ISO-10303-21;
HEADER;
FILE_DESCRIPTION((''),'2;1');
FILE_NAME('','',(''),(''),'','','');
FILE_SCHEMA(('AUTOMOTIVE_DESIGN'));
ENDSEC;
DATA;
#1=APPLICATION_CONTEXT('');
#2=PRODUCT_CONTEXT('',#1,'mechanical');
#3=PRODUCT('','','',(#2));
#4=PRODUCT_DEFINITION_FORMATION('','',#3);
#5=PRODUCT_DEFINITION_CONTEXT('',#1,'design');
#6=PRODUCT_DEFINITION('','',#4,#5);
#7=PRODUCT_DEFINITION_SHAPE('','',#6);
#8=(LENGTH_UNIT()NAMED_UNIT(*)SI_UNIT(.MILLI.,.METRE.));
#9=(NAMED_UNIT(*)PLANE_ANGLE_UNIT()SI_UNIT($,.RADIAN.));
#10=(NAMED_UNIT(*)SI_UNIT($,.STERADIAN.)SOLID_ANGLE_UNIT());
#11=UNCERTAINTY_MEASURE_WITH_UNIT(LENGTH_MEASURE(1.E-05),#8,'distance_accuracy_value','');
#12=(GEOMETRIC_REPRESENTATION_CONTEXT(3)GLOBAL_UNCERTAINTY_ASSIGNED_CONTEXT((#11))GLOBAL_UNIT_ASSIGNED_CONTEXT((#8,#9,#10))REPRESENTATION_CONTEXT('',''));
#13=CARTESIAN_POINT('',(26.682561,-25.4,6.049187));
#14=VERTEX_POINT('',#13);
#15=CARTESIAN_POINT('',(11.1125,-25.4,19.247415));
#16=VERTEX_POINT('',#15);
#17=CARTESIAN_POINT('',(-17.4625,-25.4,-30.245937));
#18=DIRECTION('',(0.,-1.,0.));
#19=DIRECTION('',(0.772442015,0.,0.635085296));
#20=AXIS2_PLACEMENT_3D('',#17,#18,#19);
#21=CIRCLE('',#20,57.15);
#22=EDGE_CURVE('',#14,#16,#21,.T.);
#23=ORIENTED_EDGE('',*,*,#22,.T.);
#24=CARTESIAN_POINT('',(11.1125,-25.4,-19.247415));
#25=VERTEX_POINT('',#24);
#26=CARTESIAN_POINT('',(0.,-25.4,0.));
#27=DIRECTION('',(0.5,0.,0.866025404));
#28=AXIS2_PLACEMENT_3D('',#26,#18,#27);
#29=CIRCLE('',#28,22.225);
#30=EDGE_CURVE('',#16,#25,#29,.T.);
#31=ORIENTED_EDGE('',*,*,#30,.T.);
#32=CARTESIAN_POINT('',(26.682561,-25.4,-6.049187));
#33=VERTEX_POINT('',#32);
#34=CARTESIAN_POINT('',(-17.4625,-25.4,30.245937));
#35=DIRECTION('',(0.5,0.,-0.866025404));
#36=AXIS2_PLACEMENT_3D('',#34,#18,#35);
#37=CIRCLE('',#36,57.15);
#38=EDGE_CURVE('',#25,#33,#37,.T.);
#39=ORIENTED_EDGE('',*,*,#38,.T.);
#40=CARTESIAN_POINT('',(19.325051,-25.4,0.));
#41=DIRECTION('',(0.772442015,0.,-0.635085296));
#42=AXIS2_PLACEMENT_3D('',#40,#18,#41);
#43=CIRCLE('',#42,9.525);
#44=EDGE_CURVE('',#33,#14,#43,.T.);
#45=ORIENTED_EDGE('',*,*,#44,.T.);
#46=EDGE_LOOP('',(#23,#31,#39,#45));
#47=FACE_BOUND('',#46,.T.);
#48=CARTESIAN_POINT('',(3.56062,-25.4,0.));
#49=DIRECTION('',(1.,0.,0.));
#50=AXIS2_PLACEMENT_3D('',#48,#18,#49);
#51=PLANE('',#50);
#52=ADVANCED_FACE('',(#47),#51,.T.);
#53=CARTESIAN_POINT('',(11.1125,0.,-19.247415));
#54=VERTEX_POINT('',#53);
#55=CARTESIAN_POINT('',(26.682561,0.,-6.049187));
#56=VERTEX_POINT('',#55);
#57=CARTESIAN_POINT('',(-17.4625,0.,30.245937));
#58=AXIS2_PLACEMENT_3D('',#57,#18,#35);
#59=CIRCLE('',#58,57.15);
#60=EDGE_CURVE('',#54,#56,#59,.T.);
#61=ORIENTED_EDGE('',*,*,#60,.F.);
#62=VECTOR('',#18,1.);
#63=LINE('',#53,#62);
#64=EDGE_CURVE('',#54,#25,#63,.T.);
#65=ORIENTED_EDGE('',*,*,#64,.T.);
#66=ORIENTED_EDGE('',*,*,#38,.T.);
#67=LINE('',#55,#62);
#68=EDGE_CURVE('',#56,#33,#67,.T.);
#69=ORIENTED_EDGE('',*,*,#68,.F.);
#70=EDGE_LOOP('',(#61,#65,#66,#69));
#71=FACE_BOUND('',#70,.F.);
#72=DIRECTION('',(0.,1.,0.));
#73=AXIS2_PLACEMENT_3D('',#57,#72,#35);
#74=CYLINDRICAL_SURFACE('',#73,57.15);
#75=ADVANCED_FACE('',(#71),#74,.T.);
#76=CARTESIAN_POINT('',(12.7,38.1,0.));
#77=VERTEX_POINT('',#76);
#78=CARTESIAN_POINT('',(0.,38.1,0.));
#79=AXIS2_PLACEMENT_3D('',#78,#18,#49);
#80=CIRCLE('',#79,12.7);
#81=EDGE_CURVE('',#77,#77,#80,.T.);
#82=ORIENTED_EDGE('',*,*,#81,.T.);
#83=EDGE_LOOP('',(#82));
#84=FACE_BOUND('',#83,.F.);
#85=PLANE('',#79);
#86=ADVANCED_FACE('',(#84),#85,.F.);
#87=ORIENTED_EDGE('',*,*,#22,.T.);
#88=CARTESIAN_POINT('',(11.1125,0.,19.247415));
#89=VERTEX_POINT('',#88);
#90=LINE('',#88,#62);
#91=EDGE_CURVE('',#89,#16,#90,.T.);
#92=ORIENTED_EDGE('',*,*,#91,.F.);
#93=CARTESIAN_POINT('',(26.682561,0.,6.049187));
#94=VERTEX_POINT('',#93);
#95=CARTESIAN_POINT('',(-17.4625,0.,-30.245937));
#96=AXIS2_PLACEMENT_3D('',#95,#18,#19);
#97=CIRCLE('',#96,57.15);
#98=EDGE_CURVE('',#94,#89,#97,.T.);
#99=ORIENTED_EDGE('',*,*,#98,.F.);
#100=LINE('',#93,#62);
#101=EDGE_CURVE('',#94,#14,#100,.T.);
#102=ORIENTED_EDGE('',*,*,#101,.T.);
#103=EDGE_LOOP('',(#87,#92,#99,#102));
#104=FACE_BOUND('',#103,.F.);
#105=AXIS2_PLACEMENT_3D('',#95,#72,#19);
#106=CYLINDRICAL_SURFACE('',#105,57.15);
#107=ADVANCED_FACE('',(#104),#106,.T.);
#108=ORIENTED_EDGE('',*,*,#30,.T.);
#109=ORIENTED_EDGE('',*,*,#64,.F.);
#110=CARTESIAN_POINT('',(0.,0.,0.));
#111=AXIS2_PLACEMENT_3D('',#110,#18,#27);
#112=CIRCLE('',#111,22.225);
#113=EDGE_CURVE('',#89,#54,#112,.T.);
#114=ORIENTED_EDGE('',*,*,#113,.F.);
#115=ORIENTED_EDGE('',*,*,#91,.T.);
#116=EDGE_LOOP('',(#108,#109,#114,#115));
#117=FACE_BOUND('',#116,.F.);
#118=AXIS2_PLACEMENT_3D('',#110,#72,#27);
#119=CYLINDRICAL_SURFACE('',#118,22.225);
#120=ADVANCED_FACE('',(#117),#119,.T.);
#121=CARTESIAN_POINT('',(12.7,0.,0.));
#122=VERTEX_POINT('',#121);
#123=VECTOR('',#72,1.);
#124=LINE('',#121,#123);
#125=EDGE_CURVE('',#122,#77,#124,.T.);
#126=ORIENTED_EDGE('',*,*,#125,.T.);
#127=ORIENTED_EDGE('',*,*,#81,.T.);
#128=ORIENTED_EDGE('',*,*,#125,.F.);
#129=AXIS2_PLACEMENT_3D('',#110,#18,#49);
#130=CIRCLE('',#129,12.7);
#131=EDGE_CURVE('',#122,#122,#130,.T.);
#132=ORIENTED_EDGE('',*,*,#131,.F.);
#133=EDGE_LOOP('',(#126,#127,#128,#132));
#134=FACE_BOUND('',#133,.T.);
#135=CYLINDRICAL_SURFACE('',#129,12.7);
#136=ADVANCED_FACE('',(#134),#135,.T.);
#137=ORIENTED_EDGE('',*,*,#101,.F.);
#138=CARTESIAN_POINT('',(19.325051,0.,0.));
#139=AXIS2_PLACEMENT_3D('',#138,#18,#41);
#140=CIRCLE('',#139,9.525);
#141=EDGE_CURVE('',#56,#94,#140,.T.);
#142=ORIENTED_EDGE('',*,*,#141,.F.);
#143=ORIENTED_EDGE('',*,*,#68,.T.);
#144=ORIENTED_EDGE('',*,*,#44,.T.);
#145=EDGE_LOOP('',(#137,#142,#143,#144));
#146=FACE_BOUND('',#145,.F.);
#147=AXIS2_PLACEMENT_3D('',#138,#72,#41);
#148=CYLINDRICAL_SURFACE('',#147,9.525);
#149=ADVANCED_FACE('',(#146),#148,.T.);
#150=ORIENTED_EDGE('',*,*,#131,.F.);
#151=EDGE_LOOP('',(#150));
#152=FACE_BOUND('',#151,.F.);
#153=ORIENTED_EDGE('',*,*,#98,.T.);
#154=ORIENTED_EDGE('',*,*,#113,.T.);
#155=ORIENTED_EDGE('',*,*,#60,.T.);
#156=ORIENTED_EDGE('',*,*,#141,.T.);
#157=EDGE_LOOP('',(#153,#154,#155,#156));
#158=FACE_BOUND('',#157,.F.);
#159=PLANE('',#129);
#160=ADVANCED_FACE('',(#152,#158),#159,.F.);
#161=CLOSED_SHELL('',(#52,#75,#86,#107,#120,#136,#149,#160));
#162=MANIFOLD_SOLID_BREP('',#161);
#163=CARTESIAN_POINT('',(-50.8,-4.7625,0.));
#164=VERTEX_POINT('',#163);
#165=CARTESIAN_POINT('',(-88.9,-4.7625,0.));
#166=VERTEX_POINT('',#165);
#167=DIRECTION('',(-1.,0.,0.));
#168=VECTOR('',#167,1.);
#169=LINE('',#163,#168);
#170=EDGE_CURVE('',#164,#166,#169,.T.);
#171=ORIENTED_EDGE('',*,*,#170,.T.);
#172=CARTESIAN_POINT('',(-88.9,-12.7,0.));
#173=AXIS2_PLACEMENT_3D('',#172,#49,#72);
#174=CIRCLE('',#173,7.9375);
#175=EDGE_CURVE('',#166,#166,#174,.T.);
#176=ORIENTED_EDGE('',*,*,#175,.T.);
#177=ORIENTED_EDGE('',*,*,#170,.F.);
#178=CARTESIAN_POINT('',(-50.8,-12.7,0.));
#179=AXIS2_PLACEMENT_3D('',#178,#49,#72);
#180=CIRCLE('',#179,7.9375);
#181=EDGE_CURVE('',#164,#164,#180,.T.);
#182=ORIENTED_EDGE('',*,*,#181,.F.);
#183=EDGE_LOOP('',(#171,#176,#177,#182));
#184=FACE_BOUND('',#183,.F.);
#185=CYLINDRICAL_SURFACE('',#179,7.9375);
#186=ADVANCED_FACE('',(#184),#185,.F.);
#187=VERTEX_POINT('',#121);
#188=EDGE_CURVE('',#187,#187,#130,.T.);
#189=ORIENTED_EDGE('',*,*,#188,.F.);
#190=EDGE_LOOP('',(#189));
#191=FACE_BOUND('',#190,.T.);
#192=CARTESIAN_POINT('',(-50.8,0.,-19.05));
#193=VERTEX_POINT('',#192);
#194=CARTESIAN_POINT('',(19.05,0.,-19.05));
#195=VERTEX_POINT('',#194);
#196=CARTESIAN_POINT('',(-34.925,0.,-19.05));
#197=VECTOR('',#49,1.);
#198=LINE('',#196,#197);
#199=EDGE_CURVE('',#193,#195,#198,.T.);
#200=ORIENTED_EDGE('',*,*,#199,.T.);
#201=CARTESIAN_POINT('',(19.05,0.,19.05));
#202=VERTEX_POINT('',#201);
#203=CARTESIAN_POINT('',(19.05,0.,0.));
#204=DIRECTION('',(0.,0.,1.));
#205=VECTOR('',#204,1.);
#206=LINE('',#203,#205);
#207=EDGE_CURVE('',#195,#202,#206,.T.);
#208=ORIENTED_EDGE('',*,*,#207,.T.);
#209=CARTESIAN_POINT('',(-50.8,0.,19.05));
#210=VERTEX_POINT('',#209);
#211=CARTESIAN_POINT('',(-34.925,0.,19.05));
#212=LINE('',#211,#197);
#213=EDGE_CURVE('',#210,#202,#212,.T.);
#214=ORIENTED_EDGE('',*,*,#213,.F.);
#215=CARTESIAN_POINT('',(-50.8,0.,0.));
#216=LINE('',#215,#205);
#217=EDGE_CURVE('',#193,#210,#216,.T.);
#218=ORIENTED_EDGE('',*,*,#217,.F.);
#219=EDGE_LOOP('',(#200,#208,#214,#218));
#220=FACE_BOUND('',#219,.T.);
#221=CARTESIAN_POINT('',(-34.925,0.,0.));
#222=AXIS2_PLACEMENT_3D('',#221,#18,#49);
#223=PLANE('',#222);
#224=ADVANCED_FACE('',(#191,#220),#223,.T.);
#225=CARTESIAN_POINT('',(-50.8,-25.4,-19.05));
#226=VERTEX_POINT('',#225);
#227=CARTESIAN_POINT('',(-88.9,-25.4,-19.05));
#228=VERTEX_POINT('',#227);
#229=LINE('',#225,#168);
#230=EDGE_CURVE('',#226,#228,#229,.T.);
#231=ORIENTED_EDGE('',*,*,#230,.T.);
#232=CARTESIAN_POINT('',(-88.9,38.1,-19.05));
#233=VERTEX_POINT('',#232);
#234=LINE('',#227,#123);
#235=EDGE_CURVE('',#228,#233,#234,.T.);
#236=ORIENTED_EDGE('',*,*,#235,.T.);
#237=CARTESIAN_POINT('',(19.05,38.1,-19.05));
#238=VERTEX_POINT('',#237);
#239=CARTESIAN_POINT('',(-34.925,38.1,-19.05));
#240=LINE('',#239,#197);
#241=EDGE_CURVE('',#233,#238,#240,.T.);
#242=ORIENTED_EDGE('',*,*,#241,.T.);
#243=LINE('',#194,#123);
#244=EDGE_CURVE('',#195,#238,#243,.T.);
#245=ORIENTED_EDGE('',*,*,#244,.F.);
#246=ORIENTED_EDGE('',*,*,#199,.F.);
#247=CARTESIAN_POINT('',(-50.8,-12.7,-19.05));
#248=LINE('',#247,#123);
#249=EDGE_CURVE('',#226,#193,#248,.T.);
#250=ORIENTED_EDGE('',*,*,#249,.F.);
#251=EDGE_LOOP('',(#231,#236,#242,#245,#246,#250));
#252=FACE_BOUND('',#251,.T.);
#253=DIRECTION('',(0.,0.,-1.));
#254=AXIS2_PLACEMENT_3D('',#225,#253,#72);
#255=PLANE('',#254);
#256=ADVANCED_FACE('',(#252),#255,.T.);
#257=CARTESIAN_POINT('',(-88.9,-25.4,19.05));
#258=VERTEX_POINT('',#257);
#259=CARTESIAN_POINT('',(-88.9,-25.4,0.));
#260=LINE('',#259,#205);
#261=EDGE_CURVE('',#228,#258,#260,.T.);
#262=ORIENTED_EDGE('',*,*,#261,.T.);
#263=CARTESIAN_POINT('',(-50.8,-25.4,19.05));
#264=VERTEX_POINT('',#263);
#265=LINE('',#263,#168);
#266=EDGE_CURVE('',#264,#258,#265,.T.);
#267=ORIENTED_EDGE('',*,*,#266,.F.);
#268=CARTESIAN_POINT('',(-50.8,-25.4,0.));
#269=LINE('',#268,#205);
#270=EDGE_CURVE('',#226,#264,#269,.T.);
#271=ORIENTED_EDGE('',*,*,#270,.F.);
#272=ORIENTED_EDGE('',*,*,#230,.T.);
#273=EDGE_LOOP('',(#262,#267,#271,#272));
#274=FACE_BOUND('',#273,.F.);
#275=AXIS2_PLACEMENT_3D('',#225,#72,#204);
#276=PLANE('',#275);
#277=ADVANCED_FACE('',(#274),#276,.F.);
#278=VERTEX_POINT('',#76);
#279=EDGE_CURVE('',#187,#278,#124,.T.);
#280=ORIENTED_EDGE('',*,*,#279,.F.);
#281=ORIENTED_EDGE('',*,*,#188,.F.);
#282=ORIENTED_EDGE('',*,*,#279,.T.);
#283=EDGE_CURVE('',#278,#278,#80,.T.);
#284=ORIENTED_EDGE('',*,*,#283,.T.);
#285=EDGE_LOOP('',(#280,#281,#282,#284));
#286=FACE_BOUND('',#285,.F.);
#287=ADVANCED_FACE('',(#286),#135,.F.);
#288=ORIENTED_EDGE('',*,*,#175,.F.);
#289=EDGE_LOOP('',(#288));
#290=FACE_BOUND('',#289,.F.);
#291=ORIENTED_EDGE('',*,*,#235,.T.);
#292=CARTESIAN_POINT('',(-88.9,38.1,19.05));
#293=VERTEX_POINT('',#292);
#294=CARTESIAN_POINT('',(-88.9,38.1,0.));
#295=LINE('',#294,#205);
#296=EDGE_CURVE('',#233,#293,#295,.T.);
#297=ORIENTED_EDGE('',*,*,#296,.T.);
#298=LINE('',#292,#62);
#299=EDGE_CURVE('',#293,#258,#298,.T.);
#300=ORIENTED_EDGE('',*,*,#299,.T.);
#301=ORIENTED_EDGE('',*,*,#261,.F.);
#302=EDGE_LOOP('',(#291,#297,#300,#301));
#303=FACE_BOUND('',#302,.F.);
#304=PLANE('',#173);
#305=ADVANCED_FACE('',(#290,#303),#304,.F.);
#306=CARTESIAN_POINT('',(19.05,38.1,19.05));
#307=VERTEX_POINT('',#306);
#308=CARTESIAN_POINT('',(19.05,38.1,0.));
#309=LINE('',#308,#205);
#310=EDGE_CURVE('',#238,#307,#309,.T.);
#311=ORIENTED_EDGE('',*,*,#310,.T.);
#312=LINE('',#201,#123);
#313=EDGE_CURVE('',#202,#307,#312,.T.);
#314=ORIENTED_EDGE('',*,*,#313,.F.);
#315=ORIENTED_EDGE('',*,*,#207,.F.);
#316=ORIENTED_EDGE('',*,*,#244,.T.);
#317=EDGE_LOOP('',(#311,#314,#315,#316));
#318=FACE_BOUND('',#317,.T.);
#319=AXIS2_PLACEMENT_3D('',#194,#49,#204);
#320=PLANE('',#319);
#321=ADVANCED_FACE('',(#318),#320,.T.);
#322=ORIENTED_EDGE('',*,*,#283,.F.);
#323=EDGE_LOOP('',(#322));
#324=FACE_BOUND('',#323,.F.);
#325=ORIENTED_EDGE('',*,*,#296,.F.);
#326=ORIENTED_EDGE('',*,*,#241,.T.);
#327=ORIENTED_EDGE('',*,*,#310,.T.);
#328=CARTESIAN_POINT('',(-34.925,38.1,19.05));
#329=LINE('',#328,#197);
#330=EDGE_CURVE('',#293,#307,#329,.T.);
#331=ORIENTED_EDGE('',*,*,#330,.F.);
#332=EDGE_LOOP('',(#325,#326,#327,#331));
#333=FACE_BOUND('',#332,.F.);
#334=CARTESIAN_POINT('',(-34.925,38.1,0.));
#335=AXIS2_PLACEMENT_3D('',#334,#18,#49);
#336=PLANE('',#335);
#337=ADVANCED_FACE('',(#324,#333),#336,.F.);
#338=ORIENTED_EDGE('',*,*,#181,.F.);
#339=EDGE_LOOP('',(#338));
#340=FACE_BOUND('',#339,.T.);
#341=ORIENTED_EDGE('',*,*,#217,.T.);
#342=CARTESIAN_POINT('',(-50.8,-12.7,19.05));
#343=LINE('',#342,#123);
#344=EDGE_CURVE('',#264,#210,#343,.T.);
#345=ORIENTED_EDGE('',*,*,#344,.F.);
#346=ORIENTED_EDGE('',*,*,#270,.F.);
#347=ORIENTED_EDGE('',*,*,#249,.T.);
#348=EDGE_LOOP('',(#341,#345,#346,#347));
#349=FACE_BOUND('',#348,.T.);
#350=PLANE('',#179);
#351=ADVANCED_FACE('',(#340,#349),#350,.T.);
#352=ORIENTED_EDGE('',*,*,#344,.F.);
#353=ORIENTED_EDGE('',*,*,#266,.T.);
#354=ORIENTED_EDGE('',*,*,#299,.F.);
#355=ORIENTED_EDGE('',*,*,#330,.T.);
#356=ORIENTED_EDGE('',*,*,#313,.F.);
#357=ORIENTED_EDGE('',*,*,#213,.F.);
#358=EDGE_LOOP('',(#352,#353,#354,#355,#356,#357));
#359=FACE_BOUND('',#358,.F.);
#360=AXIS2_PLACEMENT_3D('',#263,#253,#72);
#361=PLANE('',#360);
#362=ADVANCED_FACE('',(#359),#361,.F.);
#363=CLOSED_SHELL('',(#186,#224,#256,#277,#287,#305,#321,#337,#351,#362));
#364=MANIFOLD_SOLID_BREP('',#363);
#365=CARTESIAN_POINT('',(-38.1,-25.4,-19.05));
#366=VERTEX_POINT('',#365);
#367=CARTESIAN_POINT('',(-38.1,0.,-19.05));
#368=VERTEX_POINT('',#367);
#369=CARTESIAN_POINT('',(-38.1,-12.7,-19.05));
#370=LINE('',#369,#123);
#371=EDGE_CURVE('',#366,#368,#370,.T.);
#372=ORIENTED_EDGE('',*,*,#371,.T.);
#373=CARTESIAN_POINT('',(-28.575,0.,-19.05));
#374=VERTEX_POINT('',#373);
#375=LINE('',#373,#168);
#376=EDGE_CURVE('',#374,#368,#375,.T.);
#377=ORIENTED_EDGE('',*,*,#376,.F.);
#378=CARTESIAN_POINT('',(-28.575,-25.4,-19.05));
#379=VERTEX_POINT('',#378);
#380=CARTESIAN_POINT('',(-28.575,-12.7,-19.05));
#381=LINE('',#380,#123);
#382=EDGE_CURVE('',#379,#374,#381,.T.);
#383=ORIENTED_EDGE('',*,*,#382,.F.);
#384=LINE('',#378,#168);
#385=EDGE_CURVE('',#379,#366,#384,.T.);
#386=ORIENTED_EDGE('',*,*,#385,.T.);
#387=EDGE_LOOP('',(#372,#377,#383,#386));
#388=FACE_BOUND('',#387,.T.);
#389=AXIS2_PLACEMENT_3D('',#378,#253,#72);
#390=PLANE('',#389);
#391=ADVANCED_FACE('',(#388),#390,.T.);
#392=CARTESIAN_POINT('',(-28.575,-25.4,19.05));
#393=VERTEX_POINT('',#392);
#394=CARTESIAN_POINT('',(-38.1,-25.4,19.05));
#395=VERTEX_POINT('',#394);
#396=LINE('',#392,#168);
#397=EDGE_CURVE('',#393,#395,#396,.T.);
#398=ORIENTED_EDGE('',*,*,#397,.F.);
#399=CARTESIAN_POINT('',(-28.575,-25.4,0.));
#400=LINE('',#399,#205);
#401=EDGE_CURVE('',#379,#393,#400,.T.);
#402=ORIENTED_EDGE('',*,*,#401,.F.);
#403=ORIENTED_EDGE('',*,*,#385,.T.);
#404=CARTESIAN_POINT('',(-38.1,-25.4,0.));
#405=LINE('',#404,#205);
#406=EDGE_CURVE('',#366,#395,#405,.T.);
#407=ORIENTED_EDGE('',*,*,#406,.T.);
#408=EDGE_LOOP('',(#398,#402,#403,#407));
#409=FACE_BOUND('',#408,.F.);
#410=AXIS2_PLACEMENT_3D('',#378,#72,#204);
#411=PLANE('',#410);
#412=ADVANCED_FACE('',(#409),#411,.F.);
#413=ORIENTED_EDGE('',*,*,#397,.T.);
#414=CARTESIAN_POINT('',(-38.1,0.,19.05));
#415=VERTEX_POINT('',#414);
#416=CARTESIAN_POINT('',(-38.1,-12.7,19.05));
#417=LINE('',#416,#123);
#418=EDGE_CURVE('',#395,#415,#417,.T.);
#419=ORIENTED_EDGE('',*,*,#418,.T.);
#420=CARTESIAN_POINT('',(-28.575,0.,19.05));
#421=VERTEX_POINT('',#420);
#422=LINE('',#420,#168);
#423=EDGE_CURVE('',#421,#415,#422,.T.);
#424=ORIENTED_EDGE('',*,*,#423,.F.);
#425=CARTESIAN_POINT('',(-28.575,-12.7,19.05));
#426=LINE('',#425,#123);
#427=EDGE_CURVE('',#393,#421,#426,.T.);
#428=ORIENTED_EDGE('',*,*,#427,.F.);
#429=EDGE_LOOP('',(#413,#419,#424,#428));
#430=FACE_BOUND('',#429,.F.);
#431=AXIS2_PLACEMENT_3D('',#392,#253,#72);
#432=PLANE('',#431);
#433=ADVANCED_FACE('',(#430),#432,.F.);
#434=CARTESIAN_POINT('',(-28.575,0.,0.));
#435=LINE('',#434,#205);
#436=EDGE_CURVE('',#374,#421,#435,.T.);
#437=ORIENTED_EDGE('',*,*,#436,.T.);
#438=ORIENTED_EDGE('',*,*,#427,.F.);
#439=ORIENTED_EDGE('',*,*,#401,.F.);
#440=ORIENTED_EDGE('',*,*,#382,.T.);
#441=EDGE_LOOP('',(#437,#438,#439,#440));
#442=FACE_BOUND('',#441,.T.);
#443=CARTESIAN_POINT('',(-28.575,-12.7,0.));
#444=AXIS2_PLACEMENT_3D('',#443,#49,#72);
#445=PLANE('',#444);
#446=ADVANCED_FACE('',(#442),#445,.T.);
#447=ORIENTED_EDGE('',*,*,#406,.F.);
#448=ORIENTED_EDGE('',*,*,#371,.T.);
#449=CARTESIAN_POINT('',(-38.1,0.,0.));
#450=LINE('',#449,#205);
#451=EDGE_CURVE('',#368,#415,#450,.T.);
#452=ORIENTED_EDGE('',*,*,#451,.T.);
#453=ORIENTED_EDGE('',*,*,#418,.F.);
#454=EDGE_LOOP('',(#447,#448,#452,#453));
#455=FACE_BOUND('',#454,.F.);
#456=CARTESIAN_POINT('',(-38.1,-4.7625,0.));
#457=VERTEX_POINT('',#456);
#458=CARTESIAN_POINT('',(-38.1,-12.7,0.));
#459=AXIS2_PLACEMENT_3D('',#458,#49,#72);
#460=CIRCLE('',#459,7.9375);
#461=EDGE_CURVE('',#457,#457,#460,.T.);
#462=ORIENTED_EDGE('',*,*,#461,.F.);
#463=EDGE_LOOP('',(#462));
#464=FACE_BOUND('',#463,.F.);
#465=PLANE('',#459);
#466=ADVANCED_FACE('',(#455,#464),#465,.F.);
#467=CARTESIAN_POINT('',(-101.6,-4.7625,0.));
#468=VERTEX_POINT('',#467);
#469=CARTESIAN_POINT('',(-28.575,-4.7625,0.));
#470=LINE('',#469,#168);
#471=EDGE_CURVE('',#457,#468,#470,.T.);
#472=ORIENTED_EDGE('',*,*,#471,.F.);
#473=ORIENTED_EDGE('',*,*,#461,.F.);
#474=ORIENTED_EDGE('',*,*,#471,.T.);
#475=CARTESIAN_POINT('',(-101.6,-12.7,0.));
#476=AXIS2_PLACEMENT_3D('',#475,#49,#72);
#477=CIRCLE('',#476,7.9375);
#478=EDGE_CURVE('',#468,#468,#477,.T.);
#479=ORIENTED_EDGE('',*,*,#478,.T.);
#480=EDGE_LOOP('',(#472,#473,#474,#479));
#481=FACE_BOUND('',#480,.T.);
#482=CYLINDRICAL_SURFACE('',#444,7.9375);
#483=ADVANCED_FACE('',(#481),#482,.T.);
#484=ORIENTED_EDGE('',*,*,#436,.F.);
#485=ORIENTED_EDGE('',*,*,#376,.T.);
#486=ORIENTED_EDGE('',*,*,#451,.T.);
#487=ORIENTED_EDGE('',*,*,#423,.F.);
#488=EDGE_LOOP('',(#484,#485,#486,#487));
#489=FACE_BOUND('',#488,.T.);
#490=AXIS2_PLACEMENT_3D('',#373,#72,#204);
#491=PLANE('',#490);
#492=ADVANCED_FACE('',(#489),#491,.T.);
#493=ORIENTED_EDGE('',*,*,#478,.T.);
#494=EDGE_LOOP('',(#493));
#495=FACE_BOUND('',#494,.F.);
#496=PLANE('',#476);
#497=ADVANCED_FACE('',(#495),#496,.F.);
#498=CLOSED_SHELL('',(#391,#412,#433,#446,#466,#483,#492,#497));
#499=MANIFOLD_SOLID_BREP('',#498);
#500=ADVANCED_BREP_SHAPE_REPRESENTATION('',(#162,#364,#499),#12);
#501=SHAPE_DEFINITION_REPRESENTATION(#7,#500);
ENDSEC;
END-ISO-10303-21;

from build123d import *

# Parameters (mm, degrees)
F0_R          = 12.7
F1_DEPTH      = 25.4
F2_R          = 12.7
F3_DEPTH      = 25.4
F3_DEPTH_BACK = 38.1
F4_W          = 107.95
F4_H          = 38.1
F4_R          = 12.7
F5_DEPTH      = 38.1
F7_START      = -50.8
F6_W          = 25.4
F6_H          = 38.1
F6_R          = 7.9375
F7_DEPTH      = 38.1
F8_START      = -28.575
F8_DEPTH      = 9.525
F10_START     = -28.575
F9_R          = 7.9375
F10_DEPTH     = 73.025


with BuildPart() as f1:
    # F0 (on Front) → F1 (new body)
    with BuildSketch(Plane.XZ):
        with BuildLine():
            ThreePointArc((26.682561162, 6.0491874454), (19.4915271669, 13.3490438618), (11.1125, 19.2474145991))
            ThreePointArc((11.1125, 19.2474145991), (-22.225, 0), (11.1125, -19.2474145991))
            ThreePointArc((11.1125, -19.2474145991), (19.4915271669, -13.3490438618), (26.682561162, -6.0491874454))
            ThreePointArc((26.682561162, -6.0491874454), (28.8500509684, 0), (26.682561162, 6.0491874454))
        make_face()
        Circle(F0_R, mode=Mode.SUBTRACT)
    extrude(amount=F1_DEPTH)

    # F2 (on Front) → F3 (join, two sides)
    with BuildSketch(Plane.XZ) as f3_sk:
        Circle(F2_R)
    extrude(amount=F3_DEPTH)
    extrude(f3_sk.sketch, amount=-F3_DEPTH_BACK)


with BuildPart() as f5:
    # F4 (on Front) → F5 (new body)
    with BuildSketch(Plane.XZ):
        with Locations((-34.925, 0)):
            Rectangle(F4_W, F4_H)
        Circle(F4_R, mode=Mode.SUBTRACT)
    extrude(amount=-F5_DEPTH)

    # F6 (on Right) → F7 (join)
    with BuildSketch(Plane.YZ.offset(F7_START)):
        with Locations((-12.7, 0)):
            Rectangle(F6_W, F6_H)
        with Locations((-12.7, 0)):
            Circle(F6_R, mode=Mode.SUBTRACT)
    extrude(amount=-F7_DEPTH)


with BuildPart() as f8:
    # F6 (on Right) → F8 (new body)
    with BuildSketch(Plane.YZ.offset(F8_START)):
        with Locations((-12.7, 0)):
            Rectangle(F6_W, F6_H)
        with Locations((-12.7, 0)):
            Circle(F6_R, mode=Mode.SUBTRACT)
    extrude(amount=-F8_DEPTH)

    # F9 (on Right) → F10 (join)
    with BuildSketch(Plane.YZ.offset(F10_START)):
        with Locations((-12.7, 0)):
            Circle(F9_R)
    extrude(amount=-F10_DEPTH)


solid = Compound([f1.part, f5.part, f8.part])
